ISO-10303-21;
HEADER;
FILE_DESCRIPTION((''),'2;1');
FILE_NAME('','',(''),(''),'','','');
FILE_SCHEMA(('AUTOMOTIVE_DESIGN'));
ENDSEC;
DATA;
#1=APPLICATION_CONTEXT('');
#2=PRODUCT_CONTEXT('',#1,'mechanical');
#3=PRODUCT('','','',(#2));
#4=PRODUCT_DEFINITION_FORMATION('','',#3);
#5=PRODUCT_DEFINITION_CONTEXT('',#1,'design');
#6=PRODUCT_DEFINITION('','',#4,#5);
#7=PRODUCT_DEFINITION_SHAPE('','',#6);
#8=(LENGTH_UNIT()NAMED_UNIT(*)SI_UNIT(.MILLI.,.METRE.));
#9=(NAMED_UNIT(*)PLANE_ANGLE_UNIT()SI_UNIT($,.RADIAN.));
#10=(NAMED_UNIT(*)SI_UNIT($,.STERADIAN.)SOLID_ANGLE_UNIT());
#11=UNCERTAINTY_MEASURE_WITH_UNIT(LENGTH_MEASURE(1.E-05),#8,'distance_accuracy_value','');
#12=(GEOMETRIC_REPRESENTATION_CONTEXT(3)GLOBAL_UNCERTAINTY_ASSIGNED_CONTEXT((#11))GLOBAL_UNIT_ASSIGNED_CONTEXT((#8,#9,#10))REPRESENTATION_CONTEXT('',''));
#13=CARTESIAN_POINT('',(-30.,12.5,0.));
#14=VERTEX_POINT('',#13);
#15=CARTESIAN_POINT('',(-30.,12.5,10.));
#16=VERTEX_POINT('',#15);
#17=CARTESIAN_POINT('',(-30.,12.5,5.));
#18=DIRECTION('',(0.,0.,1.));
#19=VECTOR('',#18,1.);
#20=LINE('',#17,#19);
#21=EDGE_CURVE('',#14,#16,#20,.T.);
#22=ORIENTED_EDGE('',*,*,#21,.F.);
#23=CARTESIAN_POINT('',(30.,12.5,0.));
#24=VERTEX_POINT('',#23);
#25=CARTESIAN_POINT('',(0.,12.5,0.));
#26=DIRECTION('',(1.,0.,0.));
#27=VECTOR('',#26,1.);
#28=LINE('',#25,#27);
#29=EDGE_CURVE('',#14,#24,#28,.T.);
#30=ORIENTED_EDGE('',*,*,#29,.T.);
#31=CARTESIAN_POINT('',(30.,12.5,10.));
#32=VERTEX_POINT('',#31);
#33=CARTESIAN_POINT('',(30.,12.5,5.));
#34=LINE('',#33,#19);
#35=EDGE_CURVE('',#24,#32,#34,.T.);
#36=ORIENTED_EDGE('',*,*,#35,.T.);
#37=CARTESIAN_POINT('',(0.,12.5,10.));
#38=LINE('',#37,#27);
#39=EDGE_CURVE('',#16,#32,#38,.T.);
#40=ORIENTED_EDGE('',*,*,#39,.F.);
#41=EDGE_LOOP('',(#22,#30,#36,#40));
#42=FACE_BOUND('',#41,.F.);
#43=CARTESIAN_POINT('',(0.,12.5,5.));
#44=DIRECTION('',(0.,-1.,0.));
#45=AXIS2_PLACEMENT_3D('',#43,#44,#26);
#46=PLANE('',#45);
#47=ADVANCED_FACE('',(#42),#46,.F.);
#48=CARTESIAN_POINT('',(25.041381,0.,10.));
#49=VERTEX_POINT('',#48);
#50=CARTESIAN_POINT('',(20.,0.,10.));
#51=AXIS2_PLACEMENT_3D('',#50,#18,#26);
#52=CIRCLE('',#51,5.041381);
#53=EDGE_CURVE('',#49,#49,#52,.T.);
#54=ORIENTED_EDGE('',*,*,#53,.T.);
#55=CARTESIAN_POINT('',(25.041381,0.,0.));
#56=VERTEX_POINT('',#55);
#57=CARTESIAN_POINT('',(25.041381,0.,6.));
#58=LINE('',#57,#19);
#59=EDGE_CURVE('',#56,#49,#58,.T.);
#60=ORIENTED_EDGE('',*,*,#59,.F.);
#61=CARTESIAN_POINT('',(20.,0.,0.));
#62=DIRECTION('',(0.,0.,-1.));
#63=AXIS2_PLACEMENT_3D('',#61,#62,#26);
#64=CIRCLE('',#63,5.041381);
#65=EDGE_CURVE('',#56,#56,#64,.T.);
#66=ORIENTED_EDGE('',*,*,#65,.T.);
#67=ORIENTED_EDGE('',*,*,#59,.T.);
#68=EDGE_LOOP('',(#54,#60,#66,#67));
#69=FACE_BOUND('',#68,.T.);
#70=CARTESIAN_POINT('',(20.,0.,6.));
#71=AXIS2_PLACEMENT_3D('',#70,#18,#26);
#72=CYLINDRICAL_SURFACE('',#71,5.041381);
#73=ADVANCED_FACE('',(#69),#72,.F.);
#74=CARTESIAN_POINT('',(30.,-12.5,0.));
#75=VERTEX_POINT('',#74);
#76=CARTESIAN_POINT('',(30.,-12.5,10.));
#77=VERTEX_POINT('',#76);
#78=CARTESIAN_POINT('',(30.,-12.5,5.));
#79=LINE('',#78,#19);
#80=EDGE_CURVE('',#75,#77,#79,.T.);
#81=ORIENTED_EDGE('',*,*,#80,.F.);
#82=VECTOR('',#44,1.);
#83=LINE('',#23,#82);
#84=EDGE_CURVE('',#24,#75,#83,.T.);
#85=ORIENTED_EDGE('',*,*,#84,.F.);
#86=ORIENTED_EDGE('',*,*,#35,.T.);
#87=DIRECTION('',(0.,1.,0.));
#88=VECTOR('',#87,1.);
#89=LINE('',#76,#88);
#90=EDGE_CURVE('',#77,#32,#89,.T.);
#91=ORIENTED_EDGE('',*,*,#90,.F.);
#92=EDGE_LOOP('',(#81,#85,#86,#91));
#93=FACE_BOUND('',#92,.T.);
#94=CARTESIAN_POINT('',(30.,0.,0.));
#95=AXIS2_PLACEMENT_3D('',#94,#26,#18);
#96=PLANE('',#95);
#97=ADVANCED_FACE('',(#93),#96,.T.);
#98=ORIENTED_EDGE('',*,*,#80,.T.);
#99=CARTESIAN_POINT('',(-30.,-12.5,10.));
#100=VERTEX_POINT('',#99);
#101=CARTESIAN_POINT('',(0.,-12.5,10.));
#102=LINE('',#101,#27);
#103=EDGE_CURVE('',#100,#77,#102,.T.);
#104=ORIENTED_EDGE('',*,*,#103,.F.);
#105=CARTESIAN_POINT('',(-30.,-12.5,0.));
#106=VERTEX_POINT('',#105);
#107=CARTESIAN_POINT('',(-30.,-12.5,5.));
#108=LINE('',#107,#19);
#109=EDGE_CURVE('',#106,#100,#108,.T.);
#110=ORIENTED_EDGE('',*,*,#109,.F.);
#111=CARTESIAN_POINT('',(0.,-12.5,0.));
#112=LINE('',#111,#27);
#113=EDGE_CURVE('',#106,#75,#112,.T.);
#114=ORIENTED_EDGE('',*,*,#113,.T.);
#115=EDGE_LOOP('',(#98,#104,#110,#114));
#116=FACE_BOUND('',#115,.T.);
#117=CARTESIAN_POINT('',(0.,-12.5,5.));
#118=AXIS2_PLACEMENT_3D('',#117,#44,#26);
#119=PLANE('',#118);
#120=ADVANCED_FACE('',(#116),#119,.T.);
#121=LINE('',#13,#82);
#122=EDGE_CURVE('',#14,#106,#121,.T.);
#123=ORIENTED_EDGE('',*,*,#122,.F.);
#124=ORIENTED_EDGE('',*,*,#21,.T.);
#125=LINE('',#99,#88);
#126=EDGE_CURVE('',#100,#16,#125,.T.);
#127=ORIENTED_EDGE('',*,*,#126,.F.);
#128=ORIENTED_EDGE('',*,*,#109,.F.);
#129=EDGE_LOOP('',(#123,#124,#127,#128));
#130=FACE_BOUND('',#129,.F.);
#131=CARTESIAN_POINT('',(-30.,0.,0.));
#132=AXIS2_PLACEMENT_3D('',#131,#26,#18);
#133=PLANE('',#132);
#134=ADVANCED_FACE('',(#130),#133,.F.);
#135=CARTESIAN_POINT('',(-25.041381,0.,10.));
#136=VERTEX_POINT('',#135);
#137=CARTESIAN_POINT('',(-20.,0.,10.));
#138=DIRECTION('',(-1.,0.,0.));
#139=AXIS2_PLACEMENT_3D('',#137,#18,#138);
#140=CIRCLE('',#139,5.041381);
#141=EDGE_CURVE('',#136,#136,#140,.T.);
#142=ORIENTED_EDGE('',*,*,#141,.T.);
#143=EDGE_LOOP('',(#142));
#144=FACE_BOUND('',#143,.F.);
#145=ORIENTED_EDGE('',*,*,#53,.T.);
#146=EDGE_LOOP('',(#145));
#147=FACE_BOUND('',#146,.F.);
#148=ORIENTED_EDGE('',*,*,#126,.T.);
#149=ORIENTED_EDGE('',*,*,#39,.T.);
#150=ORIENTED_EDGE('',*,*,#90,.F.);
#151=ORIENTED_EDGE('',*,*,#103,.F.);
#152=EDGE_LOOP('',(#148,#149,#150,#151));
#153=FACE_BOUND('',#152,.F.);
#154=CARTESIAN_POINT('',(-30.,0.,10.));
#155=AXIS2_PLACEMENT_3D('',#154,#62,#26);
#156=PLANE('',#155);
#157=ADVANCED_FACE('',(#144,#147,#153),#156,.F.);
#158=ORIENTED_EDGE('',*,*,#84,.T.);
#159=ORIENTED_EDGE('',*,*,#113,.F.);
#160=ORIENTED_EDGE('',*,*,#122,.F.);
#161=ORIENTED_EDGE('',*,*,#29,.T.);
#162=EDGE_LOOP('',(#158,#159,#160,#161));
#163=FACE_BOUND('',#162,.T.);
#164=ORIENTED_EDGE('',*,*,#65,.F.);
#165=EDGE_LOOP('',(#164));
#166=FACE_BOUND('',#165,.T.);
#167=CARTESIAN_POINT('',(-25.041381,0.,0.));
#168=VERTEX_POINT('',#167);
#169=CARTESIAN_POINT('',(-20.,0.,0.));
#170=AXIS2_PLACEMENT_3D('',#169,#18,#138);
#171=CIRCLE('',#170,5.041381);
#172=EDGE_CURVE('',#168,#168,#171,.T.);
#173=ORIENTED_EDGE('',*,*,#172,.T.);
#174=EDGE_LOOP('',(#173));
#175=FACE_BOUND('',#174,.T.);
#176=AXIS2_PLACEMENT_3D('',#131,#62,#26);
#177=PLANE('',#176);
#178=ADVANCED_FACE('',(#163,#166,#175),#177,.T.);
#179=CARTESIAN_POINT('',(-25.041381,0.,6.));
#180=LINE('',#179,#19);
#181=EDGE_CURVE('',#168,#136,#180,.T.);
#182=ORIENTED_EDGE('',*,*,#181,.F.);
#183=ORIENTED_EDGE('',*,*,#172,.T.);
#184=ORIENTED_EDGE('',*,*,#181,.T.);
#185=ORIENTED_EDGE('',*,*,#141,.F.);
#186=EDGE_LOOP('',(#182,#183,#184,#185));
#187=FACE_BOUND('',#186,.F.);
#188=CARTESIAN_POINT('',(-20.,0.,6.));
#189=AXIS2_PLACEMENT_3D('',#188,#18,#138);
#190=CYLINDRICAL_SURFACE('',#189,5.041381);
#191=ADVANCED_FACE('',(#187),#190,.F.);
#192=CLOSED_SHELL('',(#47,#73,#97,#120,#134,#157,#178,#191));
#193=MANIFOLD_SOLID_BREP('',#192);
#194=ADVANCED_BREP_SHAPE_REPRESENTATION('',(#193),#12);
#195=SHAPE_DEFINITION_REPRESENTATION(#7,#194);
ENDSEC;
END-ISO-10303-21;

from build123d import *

# Parameters (mm, degrees)
F0_W     = 60
F0_H     = 10
F1_DEPTH = 12.5
F2_W     = 5.0413812651
F2_H     = 12


# Not quite as in the source:
# - a pattern or mirror of a feature is missing from the dataset's text; its kind, count and spacing are read off the source's solid


with BuildPart() as f1:
    # F0 (on Front) → F1 (new body, symmetric)
    with BuildSketch(Plane.XZ):
        with Locations((0, 5)):
            Rectangle(F0_W, F0_H)
    extrude(amount=F1_DEPTH, both=True)

    # F2 (on Front) → F3 (revolve, cut)
    with BuildSketch(Plane.XZ):
        with Locations((-22.5206906326, 6)):
            Rectangle(F2_W, F2_H)
    f3 = revolve(axis=Axis((-20, 0, 6), (0, 0, 1)), mode=Mode.SUBTRACT)

    # F3_copies: F3 across plane
    add(f3.mirror(Plane(origin=(0, 0, 0), x_dir=(0, 0, 1), z_dir=(1, 0, 0))), mode=Mode.SUBTRACT)


solid = f1.part
